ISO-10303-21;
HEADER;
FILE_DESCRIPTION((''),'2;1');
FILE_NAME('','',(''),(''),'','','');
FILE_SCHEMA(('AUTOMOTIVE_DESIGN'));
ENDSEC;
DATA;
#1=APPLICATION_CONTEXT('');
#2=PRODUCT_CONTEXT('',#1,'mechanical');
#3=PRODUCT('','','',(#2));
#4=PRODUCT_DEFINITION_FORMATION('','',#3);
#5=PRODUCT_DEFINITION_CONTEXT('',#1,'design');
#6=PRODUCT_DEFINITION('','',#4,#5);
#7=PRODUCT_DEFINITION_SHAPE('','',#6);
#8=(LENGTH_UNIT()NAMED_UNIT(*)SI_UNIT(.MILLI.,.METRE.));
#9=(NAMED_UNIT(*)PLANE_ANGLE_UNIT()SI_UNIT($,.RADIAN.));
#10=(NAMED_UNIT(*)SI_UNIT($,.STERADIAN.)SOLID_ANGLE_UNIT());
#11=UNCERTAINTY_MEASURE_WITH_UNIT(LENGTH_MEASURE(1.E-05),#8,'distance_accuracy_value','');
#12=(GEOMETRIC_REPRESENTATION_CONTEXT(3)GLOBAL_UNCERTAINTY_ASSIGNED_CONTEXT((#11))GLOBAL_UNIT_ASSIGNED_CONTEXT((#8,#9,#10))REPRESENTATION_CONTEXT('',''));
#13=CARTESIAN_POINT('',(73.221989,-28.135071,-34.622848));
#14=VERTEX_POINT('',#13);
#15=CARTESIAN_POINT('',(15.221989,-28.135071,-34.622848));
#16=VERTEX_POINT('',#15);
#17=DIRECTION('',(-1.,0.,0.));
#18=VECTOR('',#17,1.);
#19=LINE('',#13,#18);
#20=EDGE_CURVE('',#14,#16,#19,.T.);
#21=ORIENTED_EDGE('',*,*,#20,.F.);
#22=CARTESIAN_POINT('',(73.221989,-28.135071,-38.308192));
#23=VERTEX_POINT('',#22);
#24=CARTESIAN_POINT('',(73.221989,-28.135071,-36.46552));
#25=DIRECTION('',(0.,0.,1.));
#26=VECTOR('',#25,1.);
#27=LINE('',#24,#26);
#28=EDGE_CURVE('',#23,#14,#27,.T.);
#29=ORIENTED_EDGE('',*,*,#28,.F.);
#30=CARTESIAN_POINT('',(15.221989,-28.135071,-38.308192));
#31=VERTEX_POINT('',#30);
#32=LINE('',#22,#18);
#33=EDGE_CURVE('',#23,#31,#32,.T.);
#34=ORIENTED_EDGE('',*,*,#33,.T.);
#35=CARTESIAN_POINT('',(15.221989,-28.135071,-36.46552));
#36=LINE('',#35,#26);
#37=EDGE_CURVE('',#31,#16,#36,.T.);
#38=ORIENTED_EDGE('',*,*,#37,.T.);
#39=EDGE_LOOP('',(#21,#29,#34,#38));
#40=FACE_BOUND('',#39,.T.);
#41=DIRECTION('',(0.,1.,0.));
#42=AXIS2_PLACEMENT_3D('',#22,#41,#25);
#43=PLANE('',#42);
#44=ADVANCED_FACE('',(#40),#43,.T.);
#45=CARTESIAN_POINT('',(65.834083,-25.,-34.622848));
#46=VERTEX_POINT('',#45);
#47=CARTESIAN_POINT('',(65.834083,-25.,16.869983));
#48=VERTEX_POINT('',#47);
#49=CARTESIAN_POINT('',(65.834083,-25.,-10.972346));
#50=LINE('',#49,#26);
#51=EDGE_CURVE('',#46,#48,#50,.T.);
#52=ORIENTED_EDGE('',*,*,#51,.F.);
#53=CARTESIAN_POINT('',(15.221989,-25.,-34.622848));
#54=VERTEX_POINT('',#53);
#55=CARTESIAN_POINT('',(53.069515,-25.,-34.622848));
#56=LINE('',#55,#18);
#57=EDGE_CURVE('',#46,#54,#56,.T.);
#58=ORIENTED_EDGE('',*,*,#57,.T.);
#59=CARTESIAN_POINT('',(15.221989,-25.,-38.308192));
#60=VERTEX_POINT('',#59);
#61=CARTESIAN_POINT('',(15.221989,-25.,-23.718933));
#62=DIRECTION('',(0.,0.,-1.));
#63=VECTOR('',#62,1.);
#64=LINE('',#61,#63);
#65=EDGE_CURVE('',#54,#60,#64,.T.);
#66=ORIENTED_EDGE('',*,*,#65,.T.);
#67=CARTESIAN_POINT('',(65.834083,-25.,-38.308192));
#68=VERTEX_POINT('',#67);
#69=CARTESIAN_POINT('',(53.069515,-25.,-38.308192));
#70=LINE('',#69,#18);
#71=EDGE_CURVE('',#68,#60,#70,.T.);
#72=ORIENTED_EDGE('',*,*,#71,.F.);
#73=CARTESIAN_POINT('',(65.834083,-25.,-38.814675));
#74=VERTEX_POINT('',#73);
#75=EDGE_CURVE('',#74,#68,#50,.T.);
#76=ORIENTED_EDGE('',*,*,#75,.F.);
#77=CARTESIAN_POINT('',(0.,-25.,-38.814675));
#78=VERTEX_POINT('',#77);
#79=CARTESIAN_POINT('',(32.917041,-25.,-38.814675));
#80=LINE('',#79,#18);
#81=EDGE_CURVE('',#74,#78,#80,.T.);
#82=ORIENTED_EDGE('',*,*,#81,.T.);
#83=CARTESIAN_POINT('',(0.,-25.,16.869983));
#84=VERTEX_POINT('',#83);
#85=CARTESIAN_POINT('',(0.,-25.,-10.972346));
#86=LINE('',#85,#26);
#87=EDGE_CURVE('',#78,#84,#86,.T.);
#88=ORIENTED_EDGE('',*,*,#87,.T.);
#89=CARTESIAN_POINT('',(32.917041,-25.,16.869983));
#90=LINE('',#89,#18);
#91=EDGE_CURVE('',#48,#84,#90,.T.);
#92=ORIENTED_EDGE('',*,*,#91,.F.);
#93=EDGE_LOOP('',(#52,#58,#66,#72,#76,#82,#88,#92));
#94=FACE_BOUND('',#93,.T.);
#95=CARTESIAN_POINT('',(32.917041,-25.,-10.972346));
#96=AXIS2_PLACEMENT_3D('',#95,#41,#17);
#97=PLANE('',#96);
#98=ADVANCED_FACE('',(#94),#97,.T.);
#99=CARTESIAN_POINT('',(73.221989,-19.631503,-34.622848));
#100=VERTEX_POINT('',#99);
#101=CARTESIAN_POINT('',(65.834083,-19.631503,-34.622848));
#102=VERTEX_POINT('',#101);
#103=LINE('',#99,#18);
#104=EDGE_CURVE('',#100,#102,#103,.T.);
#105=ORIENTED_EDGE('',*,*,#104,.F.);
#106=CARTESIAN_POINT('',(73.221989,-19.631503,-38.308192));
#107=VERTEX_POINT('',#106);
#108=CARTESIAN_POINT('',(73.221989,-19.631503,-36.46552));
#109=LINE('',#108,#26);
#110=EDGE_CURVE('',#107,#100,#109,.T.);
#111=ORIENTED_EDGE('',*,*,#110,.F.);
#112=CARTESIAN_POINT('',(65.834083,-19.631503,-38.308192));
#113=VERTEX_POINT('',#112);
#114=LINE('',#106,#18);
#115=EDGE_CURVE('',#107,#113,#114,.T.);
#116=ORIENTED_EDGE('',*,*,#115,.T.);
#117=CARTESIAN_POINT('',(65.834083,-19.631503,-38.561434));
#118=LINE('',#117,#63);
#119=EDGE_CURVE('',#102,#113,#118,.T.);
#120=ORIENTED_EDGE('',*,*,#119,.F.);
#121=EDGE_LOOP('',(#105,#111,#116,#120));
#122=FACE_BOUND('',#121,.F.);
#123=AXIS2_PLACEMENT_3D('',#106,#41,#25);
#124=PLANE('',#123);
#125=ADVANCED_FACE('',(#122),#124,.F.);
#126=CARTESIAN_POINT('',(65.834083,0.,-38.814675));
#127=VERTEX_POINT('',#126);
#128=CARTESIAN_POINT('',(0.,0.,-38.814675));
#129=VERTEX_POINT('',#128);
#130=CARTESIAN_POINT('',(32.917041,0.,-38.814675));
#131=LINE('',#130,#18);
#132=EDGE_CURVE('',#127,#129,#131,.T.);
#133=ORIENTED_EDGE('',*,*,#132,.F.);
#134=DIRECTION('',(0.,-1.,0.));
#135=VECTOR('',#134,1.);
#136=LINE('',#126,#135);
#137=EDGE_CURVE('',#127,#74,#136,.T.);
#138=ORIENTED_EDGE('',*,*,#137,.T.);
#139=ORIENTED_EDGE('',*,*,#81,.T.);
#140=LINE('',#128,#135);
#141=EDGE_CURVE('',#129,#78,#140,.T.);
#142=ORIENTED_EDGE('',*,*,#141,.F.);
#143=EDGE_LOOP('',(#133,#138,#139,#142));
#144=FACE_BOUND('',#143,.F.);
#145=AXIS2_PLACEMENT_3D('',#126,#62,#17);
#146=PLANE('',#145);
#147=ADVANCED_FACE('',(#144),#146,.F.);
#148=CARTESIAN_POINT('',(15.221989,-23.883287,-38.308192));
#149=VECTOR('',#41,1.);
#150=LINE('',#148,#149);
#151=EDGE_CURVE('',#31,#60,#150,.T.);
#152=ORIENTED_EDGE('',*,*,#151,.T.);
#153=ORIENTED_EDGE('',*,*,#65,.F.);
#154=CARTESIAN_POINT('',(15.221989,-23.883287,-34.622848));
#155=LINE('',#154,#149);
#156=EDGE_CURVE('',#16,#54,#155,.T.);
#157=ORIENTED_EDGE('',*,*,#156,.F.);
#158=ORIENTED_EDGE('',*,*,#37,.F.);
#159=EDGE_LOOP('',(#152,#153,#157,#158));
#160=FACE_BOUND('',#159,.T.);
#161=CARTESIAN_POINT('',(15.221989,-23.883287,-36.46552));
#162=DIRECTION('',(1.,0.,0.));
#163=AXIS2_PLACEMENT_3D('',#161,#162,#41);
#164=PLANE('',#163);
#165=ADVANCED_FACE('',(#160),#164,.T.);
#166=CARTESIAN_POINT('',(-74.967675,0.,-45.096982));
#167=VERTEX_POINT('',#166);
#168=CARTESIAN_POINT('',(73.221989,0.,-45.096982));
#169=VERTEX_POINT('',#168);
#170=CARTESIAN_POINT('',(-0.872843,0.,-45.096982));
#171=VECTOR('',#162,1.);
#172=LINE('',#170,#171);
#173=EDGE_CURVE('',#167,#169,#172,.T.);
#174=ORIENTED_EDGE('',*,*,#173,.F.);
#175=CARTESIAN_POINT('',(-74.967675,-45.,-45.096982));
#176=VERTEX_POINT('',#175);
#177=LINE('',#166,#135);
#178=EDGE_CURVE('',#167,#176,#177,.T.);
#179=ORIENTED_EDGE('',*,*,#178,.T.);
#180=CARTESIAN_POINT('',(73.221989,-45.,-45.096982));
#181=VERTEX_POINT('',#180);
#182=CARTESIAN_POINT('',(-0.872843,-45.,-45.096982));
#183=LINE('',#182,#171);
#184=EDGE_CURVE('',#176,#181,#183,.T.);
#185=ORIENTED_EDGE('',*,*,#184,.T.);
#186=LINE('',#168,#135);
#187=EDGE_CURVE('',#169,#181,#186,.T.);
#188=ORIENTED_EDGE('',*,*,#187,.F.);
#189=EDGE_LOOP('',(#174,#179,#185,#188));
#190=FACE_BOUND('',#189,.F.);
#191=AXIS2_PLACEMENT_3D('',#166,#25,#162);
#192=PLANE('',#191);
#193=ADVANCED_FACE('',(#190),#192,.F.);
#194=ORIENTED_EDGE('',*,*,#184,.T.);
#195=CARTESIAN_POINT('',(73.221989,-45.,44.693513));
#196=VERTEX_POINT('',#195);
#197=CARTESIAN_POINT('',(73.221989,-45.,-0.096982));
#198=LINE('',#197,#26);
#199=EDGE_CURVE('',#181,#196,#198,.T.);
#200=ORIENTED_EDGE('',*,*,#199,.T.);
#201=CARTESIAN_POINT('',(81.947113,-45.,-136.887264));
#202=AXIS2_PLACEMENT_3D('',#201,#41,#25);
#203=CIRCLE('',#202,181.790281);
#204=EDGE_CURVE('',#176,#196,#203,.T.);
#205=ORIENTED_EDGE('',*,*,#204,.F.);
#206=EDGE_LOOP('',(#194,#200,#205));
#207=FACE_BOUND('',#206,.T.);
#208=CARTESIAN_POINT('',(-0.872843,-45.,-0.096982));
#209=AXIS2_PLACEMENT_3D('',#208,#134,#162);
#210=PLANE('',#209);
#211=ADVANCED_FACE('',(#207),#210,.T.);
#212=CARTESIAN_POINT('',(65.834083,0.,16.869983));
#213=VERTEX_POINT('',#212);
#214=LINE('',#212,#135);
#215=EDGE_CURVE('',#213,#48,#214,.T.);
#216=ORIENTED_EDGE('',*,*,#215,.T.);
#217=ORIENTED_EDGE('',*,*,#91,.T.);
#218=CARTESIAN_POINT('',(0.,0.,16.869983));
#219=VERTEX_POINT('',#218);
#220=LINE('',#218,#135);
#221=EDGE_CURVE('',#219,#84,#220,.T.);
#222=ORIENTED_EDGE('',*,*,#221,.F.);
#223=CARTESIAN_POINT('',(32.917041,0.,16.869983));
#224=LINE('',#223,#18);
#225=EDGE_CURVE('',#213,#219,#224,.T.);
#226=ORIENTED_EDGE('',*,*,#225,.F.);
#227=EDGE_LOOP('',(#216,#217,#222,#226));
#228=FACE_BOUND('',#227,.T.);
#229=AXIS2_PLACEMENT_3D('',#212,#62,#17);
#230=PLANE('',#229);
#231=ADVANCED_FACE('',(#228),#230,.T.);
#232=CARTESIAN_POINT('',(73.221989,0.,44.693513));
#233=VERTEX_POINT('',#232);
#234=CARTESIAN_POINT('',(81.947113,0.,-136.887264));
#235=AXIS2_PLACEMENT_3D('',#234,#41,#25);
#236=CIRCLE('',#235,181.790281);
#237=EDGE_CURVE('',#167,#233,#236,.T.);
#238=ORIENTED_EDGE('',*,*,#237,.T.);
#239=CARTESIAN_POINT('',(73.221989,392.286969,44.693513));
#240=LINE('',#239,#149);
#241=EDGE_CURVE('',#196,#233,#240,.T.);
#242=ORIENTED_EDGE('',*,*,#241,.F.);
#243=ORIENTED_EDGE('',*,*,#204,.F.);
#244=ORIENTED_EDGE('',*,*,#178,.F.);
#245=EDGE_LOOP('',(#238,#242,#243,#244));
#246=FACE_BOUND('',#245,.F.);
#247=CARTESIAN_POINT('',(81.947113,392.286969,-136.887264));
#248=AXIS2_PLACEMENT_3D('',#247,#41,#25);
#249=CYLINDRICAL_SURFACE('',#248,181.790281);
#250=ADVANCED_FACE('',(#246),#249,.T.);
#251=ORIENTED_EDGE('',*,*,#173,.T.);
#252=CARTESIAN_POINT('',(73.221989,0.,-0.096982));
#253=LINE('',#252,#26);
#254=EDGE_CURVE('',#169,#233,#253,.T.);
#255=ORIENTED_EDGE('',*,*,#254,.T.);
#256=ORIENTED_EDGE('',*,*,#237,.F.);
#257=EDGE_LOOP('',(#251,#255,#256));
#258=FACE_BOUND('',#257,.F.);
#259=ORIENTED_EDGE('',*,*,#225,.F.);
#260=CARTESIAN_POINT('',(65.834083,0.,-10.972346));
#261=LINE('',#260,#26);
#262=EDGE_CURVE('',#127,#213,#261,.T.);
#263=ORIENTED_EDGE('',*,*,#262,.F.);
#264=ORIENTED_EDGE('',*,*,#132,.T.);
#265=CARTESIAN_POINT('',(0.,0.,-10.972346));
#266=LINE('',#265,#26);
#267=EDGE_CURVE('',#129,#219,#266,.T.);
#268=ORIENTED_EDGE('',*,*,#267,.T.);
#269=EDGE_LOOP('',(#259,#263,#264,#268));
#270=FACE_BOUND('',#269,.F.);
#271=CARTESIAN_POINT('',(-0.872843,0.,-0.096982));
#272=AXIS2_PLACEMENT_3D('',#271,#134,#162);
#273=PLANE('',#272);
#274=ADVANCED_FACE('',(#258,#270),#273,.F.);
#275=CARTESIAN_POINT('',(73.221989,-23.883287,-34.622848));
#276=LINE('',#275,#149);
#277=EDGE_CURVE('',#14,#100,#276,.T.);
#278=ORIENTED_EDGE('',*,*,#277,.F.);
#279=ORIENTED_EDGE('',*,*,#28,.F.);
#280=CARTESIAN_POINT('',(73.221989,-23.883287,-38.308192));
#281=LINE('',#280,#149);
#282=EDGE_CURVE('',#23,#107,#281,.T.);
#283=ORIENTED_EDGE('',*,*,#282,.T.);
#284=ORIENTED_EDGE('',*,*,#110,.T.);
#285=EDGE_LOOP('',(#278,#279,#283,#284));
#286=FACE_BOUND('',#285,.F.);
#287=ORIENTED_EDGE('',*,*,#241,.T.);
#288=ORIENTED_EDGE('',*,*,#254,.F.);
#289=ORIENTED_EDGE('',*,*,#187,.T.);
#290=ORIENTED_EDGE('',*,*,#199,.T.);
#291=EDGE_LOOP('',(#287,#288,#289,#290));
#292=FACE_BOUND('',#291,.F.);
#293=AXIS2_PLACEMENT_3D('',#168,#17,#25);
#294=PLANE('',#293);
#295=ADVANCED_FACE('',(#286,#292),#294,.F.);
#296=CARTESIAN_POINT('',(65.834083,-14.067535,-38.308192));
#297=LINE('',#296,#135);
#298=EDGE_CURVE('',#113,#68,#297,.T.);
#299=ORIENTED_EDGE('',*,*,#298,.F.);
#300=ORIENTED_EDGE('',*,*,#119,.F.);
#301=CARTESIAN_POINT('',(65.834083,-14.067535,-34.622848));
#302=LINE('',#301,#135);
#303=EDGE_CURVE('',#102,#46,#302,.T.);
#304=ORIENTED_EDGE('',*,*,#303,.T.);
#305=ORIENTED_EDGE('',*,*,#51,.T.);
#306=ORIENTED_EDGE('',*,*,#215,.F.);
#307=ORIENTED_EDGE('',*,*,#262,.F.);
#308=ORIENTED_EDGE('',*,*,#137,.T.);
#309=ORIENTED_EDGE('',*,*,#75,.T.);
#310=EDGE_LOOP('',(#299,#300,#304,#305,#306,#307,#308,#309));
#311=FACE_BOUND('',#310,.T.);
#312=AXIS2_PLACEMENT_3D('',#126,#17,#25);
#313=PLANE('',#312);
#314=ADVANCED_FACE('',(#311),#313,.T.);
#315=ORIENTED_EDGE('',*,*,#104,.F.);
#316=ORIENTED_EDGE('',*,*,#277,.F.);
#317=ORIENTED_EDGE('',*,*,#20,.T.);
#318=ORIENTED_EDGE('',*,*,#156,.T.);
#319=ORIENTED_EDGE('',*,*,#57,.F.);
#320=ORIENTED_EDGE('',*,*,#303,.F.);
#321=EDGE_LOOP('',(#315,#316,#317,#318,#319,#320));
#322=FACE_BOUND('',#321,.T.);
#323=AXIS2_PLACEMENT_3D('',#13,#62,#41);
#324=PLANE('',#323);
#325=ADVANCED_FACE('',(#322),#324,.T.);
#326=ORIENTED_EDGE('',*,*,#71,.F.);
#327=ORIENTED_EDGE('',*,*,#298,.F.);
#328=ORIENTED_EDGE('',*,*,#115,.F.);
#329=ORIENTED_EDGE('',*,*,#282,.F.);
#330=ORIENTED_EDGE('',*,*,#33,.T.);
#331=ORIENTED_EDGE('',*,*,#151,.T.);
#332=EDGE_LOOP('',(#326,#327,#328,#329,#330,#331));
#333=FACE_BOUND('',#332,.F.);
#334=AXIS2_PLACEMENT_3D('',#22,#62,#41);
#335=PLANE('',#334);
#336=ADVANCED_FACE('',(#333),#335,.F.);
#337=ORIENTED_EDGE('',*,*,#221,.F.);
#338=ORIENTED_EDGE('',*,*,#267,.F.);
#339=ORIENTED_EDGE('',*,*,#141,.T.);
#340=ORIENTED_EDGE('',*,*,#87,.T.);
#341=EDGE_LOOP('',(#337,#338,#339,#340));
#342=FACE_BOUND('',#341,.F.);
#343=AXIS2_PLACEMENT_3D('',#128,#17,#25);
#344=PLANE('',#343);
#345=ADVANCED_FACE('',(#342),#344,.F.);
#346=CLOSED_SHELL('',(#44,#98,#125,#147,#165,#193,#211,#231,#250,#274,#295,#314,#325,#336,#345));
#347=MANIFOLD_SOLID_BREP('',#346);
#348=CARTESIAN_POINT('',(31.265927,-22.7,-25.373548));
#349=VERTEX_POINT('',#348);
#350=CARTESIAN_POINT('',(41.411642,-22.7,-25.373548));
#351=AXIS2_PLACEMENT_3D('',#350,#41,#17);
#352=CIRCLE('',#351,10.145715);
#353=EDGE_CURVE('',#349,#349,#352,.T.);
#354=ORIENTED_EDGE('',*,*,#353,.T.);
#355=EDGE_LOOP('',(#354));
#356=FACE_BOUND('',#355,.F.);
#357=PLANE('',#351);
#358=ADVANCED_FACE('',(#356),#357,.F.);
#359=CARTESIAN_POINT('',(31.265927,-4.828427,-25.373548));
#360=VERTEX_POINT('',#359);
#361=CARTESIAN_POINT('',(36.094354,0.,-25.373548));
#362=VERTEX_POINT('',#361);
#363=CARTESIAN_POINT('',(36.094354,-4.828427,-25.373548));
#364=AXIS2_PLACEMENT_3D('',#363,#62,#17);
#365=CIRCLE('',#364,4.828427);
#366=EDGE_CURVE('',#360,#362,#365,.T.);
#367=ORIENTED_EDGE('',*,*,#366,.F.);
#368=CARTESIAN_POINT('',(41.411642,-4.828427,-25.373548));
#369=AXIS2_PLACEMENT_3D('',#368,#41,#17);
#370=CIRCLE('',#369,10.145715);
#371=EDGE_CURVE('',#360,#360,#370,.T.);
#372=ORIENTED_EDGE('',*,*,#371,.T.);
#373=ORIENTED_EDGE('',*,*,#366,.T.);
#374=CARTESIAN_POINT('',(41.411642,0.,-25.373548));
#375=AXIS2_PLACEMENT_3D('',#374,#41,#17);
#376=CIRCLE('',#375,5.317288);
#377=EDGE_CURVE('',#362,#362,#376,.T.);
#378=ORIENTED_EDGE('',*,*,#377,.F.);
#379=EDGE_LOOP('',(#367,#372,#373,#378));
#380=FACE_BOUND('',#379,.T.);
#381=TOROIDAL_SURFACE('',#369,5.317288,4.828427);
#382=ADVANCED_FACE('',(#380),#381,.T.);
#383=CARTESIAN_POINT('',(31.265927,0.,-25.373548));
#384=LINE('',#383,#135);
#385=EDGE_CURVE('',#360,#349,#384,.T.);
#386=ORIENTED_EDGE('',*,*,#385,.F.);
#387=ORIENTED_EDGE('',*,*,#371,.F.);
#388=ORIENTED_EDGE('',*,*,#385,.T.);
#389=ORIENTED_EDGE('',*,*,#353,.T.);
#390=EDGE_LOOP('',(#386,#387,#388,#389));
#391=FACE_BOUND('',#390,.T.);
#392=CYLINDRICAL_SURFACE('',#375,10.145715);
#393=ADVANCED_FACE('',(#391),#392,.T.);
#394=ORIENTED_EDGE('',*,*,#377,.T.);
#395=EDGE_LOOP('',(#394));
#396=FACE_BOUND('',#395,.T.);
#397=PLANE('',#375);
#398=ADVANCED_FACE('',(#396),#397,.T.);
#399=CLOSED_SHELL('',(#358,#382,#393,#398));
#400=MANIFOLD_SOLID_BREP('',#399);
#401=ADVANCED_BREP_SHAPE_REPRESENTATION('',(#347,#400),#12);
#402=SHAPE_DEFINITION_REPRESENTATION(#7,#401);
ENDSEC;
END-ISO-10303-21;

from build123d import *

# Parameters (mm, degrees)
F0_W        = 148.189663887
F0_H        = 89.999999851
F1_DEPTH    = 45
F2_T1_DEPTH = 829.5739384699
F3_W        = 65.8340826631
F3_H        = 55.6846577674
F4_DEPTH    = 25
F5_R        = 10.1457152629
F6_DEPTH    = 22.7
F7_R        = 4.8284271247
F8_W        = 8.5035674274
F8_H        = 3.6853440106
F9_DEPTH    = 58


# Not quite as in the source:
# - a fillet or chamfer that OpenCascade refuses, or shapes differently, is made with other operations: its cross-section is extruded or revolved along the edge and cut away or added


with BuildPart() as f1:
    # F0 (on Front) → F1 (new body)
    with BuildSketch(Plane.XZ):
        with Locations((-0.8728429675, -0.096982345)):
            Rectangle(F0_W, F0_H)
    extrude(amount=F1_DEPTH)

    # F2: fillet of radius 181.7902812467 on 1 edges, made by hand

    # F2_s2 → F2_t1 (cut)
    with BuildSketch(Plane.XZ.offset(-392.286969235)):
        with BuildLine():
            ThreePointArc((81.947112783, 44.9030175805), (-8.4993500697, 20.8059312193), (-74.967674911, -45.0969822705))
            Line((-74.967674911, -45.0969822705), (-74.967674911, 44.9030175805))
            Line((-74.967674911, 44.9030175805), (81.947112783, 44.9030175805))
        make_face()
    extrude(amount=F2_T1_DEPTH, mode=Mode.SUBTRACT)

    # F3 (on face) → F4 (cut)
    with BuildSketch(Plane(origin=(0, 0, 0), x_dir=(-1, 0, 0), z_dir=(0, 1, 0))):
        with Locations((-32.9170413315, -10.9723461792)):
            Rectangle(F3_W, F3_H)
    extrude(amount=-F4_DEPTH, mode=Mode.SUBTRACT)

    # F8 (on face) → F9 (cut)
    with BuildSketch(Plane.YZ.offset(73.221988976)):
        with Locations((-23.8832868636, -36.4655200392)):
            Rectangle(F8_W, F8_H)
    extrude(amount=-F9_DEPTH, mode=Mode.SUBTRACT)


with BuildPart() as f6:
    # F5 (on face) → F6 (new body)
    with BuildSketch(Plane(origin=(0, 0, 0), x_dir=(-1, 0, 0), z_dir=(0, 1, 0))):
        with Locations((-41.4116419852, -25.3735482693)):
            Circle(F5_R)
    extrude(amount=-F6_DEPTH)

    # F7
    f7_edges = [f6.edges().sort_by_distance(p)[0] for p in [
        (51.557357, 0, -25.373548),
    ]]
    fillet(f7_edges, radius=F7_R)


solid = Compound([f1.part, f6.part])
